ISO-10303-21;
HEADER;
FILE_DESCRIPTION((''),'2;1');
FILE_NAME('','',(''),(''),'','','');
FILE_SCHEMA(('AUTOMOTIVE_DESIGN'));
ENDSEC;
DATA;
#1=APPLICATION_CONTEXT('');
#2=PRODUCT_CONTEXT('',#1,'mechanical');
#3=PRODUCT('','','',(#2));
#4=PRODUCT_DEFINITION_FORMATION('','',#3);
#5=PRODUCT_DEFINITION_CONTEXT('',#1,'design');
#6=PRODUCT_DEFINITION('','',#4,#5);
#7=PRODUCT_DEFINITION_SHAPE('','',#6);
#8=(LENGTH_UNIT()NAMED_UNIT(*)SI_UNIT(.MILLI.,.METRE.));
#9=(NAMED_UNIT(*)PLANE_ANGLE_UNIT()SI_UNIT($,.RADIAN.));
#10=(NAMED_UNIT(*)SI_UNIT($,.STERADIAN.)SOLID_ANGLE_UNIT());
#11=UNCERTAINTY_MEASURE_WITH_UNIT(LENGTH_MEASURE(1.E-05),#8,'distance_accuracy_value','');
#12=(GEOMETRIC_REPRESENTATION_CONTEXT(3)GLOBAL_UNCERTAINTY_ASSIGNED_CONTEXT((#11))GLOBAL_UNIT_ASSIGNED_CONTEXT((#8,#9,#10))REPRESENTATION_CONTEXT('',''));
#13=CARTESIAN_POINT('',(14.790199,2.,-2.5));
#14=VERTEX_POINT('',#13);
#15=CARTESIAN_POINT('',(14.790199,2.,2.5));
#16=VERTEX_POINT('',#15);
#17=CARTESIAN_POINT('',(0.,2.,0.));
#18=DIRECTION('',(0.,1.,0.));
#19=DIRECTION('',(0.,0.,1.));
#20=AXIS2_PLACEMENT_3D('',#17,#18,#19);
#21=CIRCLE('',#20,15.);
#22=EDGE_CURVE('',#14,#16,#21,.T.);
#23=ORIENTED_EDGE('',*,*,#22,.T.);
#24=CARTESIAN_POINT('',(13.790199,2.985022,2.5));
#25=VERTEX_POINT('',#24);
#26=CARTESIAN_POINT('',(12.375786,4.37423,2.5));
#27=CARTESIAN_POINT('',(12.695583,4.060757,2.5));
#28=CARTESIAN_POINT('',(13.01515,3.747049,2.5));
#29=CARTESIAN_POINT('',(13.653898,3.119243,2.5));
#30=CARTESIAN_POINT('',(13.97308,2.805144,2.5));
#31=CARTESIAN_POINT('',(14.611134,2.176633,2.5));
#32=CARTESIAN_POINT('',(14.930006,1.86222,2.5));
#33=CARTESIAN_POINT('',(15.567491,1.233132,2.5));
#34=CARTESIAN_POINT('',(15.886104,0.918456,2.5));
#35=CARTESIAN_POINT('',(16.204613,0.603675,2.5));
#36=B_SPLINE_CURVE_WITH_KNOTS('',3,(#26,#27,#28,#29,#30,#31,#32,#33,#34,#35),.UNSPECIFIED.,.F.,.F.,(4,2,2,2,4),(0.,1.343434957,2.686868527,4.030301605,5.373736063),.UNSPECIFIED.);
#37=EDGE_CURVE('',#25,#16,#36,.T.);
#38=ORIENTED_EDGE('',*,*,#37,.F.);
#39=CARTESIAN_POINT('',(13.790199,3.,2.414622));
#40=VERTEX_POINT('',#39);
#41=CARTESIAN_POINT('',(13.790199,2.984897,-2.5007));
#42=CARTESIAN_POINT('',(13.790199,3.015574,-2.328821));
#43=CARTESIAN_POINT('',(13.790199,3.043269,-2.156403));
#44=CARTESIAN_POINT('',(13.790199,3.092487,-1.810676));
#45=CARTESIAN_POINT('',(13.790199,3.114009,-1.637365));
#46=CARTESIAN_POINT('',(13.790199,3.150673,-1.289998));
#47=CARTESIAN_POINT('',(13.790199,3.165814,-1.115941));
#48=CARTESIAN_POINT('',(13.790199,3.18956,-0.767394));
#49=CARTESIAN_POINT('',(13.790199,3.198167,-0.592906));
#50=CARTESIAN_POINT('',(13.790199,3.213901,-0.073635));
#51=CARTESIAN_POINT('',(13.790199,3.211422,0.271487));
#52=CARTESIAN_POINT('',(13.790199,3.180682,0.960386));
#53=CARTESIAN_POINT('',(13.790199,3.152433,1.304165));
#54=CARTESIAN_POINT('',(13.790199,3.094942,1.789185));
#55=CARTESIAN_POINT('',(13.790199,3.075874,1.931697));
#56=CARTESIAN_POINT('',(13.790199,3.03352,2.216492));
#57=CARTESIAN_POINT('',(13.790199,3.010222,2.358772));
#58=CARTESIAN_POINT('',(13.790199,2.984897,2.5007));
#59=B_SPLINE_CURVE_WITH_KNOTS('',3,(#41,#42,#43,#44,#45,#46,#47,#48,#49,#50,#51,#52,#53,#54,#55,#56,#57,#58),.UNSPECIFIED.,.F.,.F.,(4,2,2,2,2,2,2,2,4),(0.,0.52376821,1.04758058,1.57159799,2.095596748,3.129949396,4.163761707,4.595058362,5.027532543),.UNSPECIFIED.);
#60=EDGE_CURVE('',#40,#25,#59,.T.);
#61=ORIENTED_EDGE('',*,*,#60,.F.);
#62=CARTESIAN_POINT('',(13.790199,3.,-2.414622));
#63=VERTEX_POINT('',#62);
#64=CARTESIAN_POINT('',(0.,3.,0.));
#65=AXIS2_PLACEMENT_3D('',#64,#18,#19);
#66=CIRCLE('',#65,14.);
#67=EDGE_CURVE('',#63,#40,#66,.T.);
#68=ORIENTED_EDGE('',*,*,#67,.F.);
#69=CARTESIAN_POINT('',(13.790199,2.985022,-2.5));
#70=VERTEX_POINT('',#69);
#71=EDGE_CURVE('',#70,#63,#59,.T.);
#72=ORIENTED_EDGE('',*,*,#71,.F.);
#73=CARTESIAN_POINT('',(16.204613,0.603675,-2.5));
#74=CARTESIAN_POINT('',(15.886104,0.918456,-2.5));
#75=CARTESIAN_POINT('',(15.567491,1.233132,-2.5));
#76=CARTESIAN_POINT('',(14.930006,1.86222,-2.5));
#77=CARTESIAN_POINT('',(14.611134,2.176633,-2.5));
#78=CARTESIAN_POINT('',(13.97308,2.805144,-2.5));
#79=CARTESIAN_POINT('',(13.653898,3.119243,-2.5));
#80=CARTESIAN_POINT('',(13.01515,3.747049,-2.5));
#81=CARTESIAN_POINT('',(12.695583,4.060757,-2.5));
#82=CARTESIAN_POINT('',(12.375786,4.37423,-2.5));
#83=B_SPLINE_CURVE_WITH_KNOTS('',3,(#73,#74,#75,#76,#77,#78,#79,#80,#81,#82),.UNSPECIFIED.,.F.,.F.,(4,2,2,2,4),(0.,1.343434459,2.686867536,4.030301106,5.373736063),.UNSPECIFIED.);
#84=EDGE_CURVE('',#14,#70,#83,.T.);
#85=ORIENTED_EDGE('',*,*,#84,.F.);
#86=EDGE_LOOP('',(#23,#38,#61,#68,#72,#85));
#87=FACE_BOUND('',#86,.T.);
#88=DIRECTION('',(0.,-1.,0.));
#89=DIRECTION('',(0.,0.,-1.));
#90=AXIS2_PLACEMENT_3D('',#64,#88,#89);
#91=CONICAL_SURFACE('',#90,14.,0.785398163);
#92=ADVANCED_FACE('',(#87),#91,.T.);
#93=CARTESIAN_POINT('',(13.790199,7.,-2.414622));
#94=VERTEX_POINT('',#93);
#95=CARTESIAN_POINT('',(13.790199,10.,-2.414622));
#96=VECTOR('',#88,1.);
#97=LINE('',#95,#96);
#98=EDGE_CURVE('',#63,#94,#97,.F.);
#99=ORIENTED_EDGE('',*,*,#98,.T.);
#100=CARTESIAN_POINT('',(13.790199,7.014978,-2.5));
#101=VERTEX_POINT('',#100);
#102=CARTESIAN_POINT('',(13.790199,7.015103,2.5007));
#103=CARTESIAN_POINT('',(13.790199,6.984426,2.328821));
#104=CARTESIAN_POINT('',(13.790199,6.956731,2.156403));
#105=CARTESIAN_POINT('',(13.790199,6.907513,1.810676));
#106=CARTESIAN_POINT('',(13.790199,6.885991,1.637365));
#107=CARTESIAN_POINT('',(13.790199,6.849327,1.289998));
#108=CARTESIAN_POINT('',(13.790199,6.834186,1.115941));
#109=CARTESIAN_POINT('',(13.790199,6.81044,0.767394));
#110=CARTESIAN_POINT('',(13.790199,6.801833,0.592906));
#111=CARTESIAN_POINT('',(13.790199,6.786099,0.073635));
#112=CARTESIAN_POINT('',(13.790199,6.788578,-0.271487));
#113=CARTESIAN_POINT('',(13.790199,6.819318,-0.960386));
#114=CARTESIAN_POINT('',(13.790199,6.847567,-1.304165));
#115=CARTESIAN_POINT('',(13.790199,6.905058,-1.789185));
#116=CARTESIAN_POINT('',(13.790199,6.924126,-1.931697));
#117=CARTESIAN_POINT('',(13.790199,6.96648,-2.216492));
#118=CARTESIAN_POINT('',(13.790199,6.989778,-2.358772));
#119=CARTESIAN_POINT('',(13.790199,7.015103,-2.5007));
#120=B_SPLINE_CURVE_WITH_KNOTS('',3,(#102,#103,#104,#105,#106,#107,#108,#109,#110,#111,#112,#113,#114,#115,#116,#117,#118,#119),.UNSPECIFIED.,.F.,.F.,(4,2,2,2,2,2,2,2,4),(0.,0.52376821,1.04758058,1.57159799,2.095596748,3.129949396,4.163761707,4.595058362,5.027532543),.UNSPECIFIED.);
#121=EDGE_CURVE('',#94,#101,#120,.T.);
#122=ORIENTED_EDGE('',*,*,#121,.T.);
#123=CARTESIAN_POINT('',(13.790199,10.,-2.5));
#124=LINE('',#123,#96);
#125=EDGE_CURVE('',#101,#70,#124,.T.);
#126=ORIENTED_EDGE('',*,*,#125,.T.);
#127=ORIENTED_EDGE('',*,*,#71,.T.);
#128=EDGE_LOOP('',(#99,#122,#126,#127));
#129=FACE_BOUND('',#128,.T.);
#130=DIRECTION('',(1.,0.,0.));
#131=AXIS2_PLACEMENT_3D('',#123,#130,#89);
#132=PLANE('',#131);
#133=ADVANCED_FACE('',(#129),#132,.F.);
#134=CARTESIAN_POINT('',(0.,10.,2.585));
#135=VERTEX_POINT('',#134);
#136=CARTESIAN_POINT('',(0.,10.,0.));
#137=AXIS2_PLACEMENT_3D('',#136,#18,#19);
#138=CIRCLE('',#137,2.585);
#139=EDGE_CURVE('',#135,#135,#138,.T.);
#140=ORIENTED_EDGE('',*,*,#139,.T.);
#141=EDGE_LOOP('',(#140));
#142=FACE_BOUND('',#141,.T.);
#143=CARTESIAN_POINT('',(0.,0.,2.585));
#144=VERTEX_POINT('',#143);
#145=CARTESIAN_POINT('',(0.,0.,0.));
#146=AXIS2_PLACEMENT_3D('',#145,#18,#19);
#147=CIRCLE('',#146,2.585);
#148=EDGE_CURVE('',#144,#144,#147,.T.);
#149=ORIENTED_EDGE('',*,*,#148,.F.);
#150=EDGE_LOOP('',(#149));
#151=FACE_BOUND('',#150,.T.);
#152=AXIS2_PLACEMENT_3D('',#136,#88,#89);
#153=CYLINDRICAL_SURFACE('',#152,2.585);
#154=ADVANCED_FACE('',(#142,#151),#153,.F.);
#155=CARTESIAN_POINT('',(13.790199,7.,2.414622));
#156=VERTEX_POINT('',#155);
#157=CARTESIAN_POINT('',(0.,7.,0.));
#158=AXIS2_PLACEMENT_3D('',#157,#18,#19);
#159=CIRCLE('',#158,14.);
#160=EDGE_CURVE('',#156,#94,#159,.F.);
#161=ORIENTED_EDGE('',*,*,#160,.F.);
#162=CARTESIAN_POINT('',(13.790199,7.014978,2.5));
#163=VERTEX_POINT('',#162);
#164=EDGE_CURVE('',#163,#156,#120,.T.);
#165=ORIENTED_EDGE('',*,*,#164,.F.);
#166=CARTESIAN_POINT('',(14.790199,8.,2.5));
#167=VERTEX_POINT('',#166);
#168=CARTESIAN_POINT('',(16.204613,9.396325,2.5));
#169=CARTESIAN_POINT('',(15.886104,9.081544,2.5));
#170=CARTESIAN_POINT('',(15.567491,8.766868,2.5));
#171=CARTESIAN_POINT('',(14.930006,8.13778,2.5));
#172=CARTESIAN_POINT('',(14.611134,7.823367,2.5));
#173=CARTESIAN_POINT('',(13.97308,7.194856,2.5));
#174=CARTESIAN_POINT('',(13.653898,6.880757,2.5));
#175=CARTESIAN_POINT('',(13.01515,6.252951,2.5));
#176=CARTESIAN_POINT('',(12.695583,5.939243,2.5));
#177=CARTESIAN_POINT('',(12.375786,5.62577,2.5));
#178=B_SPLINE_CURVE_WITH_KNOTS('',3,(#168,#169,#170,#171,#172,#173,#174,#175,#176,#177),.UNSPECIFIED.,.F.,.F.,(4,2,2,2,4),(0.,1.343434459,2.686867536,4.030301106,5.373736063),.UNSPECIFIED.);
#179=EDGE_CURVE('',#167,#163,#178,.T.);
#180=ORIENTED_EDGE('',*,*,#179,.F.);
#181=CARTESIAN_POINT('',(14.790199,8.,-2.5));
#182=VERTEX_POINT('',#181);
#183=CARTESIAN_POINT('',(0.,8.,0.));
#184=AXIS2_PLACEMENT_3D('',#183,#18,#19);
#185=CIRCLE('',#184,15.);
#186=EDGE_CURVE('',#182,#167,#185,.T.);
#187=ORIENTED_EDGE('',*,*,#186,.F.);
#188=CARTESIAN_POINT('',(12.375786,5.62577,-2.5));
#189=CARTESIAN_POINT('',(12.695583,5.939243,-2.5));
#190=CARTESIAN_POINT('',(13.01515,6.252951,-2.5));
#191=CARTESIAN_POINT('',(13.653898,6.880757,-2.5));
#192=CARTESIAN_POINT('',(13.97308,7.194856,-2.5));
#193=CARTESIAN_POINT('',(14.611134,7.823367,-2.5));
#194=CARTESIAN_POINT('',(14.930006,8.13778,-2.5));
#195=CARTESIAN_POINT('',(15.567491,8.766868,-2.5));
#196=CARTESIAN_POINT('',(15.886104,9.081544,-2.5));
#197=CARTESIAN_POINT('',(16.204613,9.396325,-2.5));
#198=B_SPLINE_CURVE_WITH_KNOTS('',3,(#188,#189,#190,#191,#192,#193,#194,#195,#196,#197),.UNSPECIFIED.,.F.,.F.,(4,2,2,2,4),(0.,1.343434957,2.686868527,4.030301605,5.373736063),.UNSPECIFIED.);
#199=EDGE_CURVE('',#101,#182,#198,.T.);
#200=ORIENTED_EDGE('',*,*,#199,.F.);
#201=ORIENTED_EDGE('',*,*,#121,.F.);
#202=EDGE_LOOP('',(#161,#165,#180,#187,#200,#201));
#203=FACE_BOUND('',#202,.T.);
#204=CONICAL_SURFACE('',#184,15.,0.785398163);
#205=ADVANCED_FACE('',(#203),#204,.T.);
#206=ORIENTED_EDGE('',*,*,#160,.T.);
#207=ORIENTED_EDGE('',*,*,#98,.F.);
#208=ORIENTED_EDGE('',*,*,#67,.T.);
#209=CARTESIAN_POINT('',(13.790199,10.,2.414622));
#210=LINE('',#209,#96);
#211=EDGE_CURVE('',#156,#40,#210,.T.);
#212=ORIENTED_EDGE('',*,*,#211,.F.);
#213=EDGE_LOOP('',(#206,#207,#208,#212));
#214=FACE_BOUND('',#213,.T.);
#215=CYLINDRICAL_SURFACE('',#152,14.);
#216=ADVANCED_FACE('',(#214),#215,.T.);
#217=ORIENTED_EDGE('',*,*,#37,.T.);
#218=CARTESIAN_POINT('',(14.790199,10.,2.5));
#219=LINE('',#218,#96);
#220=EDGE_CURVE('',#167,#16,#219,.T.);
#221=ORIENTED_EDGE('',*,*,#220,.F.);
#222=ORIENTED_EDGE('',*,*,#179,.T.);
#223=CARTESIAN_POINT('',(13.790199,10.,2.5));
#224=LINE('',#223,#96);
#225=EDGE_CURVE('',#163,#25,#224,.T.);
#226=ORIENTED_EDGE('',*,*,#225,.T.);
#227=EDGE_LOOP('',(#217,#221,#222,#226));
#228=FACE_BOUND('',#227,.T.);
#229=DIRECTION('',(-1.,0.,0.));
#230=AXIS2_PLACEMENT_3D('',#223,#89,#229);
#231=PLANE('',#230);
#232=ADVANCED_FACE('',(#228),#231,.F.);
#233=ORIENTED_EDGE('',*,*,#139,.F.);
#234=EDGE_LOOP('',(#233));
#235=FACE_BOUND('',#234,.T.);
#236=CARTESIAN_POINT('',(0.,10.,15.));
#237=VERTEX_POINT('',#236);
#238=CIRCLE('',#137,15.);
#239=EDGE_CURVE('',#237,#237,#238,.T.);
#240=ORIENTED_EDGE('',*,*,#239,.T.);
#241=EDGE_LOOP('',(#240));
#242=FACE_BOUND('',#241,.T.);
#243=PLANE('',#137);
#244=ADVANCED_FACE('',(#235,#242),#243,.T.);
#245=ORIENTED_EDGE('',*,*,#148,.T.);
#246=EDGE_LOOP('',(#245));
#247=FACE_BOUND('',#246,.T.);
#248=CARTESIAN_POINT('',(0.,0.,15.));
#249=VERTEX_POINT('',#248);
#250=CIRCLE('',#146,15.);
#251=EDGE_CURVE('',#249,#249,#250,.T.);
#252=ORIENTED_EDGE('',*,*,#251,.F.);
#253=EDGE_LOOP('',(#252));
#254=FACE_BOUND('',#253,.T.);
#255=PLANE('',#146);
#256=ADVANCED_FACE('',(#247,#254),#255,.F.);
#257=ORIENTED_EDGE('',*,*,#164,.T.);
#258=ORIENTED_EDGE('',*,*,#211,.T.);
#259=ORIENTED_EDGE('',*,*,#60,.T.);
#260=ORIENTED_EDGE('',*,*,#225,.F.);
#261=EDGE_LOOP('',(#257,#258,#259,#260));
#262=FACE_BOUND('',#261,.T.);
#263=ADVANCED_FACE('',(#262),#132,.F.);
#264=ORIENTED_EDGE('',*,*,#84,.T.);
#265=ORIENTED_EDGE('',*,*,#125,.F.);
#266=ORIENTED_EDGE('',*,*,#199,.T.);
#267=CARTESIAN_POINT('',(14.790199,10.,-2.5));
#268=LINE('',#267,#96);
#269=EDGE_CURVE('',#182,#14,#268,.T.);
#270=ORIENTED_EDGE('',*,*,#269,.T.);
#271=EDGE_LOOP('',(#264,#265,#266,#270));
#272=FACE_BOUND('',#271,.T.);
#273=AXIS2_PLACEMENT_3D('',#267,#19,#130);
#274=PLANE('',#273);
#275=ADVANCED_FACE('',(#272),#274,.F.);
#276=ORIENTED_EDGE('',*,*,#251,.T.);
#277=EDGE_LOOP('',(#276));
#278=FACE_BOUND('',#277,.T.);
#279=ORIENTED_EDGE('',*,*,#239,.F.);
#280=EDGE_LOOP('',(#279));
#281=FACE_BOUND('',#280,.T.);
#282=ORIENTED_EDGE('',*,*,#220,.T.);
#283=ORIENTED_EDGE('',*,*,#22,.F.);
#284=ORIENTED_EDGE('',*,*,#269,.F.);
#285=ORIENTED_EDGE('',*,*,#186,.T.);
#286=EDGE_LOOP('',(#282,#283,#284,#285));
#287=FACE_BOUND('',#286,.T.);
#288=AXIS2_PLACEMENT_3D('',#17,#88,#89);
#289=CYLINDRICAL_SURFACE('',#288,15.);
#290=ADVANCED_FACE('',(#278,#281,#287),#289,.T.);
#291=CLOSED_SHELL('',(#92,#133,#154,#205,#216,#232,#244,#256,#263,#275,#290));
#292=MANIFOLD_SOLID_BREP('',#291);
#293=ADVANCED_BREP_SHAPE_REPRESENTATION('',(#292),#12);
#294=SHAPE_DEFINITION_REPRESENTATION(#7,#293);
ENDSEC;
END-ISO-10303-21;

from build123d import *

# Parameters (mm, degrees)
SKETCH1_R           = 14
SKETCH1_R_2         = 2.585
BOSS_EXTRUDE1_DEPTH = 10
SKETCH1_3_R         = 15
SKETCH1_3_R_2       = 14
BOSS_EXTRUDE2_DEPTH = 2
BOSS_EXTRUDE3_START = 8
SKETCH1_4_R         = 15
SKETCH1_4_R_2       = 14
BOSS_EXTRUDE3_DEPTH = 2
CHAMFER1_SIZE       = 1
BOSS_EXTRUDE4_REACH = 25.452


with BuildPart() as part:
    # Sketch1 → Boss-Extrude1 (new body)
    with BuildSketch(Plane(origin=(0, 0, 0), x_dir=(1, 0, 0), z_dir=(0, 1, 0))):
        with Locations(Location((0, 0, 0), (0, 0, 270))):
            Circle(SKETCH1_R)
        with Locations(Location((0, 0, 0), (0, 0, 270))):
            Circle(SKETCH1_R_2, mode=Mode.SUBTRACT)
    extrude(amount=BOSS_EXTRUDE1_DEPTH)

    # Sketch1<3> → Boss-Extrude2 (add)
    with BuildSketch(Plane(origin=(0, 0, 0), x_dir=(1, 0, 0), z_dir=(0, 1, 0))):
        with Locations(Location((0, 0, 0), (0, 0, 270))):
            Circle(SKETCH1_3_R)
        with Locations(Location((0, 0, 0), (0, 0, 270))):
            Circle(SKETCH1_3_R_2, mode=Mode.SUBTRACT)
    extrude(amount=BOSS_EXTRUDE2_DEPTH)

    # Sketch1<4> → Boss-Extrude3 (add)
    with BuildSketch(Plane(origin=(0, 0, 0), x_dir=(1, 0, 0), z_dir=(0, 1, 0)).offset(BOSS_EXTRUDE3_START)):
        with Locations(Location((0, 0, 0), (0, 0, 270))):
            Circle(SKETCH1_4_R)
        with Locations(Location((0, 0, 0), (0, 0, 270))):
            Circle(SKETCH1_4_R_2, mode=Mode.SUBTRACT)
    extrude(amount=BOSS_EXTRUDE3_DEPTH)

    # Chamfer1
    chamfer1_edges = [part.edges().sort_by_distance(p)[0] for p in [
        (0, 2, -14),
        (0, 8, -14),
    ]]
    chamfer(chamfer1_edges, length=CHAMFER1_SIZE - 0.0001)  # a hair under: the kernel refuses the full size

    # Sketch2 → Boss-Extrude4 (add, up to next)
    with BuildSketch(Plane(origin=(0, 0, 0), x_dir=(1, 0, 0), z_dir=(0, 1, 0)), mode=Mode.PRIVATE) as boss_extrude4_sk1:
        with BuildLine():
            Line((14.790199458, 2.5), (13.790199458, 2.5))
            Line((13.790199458, 2.5), (13.790199458, -2.5))
            Line((13.790199458, -2.5), (14.790199458, -2.5))
            ThreePointArc((14.790199458, -2.5), (15, 0), (14.790199458, 2.5))
        make_face()
    boss_extrude4_tool1 = extrude(boss_extrude4_sk1.sketch, amount=BOSS_EXTRUDE4_REACH, mode=Mode.PRIVATE) - part.part
    add(boss_extrude4_tool1.solids().sort_by_distance((14.361944, 0, 0))[0])


solid = part.part
